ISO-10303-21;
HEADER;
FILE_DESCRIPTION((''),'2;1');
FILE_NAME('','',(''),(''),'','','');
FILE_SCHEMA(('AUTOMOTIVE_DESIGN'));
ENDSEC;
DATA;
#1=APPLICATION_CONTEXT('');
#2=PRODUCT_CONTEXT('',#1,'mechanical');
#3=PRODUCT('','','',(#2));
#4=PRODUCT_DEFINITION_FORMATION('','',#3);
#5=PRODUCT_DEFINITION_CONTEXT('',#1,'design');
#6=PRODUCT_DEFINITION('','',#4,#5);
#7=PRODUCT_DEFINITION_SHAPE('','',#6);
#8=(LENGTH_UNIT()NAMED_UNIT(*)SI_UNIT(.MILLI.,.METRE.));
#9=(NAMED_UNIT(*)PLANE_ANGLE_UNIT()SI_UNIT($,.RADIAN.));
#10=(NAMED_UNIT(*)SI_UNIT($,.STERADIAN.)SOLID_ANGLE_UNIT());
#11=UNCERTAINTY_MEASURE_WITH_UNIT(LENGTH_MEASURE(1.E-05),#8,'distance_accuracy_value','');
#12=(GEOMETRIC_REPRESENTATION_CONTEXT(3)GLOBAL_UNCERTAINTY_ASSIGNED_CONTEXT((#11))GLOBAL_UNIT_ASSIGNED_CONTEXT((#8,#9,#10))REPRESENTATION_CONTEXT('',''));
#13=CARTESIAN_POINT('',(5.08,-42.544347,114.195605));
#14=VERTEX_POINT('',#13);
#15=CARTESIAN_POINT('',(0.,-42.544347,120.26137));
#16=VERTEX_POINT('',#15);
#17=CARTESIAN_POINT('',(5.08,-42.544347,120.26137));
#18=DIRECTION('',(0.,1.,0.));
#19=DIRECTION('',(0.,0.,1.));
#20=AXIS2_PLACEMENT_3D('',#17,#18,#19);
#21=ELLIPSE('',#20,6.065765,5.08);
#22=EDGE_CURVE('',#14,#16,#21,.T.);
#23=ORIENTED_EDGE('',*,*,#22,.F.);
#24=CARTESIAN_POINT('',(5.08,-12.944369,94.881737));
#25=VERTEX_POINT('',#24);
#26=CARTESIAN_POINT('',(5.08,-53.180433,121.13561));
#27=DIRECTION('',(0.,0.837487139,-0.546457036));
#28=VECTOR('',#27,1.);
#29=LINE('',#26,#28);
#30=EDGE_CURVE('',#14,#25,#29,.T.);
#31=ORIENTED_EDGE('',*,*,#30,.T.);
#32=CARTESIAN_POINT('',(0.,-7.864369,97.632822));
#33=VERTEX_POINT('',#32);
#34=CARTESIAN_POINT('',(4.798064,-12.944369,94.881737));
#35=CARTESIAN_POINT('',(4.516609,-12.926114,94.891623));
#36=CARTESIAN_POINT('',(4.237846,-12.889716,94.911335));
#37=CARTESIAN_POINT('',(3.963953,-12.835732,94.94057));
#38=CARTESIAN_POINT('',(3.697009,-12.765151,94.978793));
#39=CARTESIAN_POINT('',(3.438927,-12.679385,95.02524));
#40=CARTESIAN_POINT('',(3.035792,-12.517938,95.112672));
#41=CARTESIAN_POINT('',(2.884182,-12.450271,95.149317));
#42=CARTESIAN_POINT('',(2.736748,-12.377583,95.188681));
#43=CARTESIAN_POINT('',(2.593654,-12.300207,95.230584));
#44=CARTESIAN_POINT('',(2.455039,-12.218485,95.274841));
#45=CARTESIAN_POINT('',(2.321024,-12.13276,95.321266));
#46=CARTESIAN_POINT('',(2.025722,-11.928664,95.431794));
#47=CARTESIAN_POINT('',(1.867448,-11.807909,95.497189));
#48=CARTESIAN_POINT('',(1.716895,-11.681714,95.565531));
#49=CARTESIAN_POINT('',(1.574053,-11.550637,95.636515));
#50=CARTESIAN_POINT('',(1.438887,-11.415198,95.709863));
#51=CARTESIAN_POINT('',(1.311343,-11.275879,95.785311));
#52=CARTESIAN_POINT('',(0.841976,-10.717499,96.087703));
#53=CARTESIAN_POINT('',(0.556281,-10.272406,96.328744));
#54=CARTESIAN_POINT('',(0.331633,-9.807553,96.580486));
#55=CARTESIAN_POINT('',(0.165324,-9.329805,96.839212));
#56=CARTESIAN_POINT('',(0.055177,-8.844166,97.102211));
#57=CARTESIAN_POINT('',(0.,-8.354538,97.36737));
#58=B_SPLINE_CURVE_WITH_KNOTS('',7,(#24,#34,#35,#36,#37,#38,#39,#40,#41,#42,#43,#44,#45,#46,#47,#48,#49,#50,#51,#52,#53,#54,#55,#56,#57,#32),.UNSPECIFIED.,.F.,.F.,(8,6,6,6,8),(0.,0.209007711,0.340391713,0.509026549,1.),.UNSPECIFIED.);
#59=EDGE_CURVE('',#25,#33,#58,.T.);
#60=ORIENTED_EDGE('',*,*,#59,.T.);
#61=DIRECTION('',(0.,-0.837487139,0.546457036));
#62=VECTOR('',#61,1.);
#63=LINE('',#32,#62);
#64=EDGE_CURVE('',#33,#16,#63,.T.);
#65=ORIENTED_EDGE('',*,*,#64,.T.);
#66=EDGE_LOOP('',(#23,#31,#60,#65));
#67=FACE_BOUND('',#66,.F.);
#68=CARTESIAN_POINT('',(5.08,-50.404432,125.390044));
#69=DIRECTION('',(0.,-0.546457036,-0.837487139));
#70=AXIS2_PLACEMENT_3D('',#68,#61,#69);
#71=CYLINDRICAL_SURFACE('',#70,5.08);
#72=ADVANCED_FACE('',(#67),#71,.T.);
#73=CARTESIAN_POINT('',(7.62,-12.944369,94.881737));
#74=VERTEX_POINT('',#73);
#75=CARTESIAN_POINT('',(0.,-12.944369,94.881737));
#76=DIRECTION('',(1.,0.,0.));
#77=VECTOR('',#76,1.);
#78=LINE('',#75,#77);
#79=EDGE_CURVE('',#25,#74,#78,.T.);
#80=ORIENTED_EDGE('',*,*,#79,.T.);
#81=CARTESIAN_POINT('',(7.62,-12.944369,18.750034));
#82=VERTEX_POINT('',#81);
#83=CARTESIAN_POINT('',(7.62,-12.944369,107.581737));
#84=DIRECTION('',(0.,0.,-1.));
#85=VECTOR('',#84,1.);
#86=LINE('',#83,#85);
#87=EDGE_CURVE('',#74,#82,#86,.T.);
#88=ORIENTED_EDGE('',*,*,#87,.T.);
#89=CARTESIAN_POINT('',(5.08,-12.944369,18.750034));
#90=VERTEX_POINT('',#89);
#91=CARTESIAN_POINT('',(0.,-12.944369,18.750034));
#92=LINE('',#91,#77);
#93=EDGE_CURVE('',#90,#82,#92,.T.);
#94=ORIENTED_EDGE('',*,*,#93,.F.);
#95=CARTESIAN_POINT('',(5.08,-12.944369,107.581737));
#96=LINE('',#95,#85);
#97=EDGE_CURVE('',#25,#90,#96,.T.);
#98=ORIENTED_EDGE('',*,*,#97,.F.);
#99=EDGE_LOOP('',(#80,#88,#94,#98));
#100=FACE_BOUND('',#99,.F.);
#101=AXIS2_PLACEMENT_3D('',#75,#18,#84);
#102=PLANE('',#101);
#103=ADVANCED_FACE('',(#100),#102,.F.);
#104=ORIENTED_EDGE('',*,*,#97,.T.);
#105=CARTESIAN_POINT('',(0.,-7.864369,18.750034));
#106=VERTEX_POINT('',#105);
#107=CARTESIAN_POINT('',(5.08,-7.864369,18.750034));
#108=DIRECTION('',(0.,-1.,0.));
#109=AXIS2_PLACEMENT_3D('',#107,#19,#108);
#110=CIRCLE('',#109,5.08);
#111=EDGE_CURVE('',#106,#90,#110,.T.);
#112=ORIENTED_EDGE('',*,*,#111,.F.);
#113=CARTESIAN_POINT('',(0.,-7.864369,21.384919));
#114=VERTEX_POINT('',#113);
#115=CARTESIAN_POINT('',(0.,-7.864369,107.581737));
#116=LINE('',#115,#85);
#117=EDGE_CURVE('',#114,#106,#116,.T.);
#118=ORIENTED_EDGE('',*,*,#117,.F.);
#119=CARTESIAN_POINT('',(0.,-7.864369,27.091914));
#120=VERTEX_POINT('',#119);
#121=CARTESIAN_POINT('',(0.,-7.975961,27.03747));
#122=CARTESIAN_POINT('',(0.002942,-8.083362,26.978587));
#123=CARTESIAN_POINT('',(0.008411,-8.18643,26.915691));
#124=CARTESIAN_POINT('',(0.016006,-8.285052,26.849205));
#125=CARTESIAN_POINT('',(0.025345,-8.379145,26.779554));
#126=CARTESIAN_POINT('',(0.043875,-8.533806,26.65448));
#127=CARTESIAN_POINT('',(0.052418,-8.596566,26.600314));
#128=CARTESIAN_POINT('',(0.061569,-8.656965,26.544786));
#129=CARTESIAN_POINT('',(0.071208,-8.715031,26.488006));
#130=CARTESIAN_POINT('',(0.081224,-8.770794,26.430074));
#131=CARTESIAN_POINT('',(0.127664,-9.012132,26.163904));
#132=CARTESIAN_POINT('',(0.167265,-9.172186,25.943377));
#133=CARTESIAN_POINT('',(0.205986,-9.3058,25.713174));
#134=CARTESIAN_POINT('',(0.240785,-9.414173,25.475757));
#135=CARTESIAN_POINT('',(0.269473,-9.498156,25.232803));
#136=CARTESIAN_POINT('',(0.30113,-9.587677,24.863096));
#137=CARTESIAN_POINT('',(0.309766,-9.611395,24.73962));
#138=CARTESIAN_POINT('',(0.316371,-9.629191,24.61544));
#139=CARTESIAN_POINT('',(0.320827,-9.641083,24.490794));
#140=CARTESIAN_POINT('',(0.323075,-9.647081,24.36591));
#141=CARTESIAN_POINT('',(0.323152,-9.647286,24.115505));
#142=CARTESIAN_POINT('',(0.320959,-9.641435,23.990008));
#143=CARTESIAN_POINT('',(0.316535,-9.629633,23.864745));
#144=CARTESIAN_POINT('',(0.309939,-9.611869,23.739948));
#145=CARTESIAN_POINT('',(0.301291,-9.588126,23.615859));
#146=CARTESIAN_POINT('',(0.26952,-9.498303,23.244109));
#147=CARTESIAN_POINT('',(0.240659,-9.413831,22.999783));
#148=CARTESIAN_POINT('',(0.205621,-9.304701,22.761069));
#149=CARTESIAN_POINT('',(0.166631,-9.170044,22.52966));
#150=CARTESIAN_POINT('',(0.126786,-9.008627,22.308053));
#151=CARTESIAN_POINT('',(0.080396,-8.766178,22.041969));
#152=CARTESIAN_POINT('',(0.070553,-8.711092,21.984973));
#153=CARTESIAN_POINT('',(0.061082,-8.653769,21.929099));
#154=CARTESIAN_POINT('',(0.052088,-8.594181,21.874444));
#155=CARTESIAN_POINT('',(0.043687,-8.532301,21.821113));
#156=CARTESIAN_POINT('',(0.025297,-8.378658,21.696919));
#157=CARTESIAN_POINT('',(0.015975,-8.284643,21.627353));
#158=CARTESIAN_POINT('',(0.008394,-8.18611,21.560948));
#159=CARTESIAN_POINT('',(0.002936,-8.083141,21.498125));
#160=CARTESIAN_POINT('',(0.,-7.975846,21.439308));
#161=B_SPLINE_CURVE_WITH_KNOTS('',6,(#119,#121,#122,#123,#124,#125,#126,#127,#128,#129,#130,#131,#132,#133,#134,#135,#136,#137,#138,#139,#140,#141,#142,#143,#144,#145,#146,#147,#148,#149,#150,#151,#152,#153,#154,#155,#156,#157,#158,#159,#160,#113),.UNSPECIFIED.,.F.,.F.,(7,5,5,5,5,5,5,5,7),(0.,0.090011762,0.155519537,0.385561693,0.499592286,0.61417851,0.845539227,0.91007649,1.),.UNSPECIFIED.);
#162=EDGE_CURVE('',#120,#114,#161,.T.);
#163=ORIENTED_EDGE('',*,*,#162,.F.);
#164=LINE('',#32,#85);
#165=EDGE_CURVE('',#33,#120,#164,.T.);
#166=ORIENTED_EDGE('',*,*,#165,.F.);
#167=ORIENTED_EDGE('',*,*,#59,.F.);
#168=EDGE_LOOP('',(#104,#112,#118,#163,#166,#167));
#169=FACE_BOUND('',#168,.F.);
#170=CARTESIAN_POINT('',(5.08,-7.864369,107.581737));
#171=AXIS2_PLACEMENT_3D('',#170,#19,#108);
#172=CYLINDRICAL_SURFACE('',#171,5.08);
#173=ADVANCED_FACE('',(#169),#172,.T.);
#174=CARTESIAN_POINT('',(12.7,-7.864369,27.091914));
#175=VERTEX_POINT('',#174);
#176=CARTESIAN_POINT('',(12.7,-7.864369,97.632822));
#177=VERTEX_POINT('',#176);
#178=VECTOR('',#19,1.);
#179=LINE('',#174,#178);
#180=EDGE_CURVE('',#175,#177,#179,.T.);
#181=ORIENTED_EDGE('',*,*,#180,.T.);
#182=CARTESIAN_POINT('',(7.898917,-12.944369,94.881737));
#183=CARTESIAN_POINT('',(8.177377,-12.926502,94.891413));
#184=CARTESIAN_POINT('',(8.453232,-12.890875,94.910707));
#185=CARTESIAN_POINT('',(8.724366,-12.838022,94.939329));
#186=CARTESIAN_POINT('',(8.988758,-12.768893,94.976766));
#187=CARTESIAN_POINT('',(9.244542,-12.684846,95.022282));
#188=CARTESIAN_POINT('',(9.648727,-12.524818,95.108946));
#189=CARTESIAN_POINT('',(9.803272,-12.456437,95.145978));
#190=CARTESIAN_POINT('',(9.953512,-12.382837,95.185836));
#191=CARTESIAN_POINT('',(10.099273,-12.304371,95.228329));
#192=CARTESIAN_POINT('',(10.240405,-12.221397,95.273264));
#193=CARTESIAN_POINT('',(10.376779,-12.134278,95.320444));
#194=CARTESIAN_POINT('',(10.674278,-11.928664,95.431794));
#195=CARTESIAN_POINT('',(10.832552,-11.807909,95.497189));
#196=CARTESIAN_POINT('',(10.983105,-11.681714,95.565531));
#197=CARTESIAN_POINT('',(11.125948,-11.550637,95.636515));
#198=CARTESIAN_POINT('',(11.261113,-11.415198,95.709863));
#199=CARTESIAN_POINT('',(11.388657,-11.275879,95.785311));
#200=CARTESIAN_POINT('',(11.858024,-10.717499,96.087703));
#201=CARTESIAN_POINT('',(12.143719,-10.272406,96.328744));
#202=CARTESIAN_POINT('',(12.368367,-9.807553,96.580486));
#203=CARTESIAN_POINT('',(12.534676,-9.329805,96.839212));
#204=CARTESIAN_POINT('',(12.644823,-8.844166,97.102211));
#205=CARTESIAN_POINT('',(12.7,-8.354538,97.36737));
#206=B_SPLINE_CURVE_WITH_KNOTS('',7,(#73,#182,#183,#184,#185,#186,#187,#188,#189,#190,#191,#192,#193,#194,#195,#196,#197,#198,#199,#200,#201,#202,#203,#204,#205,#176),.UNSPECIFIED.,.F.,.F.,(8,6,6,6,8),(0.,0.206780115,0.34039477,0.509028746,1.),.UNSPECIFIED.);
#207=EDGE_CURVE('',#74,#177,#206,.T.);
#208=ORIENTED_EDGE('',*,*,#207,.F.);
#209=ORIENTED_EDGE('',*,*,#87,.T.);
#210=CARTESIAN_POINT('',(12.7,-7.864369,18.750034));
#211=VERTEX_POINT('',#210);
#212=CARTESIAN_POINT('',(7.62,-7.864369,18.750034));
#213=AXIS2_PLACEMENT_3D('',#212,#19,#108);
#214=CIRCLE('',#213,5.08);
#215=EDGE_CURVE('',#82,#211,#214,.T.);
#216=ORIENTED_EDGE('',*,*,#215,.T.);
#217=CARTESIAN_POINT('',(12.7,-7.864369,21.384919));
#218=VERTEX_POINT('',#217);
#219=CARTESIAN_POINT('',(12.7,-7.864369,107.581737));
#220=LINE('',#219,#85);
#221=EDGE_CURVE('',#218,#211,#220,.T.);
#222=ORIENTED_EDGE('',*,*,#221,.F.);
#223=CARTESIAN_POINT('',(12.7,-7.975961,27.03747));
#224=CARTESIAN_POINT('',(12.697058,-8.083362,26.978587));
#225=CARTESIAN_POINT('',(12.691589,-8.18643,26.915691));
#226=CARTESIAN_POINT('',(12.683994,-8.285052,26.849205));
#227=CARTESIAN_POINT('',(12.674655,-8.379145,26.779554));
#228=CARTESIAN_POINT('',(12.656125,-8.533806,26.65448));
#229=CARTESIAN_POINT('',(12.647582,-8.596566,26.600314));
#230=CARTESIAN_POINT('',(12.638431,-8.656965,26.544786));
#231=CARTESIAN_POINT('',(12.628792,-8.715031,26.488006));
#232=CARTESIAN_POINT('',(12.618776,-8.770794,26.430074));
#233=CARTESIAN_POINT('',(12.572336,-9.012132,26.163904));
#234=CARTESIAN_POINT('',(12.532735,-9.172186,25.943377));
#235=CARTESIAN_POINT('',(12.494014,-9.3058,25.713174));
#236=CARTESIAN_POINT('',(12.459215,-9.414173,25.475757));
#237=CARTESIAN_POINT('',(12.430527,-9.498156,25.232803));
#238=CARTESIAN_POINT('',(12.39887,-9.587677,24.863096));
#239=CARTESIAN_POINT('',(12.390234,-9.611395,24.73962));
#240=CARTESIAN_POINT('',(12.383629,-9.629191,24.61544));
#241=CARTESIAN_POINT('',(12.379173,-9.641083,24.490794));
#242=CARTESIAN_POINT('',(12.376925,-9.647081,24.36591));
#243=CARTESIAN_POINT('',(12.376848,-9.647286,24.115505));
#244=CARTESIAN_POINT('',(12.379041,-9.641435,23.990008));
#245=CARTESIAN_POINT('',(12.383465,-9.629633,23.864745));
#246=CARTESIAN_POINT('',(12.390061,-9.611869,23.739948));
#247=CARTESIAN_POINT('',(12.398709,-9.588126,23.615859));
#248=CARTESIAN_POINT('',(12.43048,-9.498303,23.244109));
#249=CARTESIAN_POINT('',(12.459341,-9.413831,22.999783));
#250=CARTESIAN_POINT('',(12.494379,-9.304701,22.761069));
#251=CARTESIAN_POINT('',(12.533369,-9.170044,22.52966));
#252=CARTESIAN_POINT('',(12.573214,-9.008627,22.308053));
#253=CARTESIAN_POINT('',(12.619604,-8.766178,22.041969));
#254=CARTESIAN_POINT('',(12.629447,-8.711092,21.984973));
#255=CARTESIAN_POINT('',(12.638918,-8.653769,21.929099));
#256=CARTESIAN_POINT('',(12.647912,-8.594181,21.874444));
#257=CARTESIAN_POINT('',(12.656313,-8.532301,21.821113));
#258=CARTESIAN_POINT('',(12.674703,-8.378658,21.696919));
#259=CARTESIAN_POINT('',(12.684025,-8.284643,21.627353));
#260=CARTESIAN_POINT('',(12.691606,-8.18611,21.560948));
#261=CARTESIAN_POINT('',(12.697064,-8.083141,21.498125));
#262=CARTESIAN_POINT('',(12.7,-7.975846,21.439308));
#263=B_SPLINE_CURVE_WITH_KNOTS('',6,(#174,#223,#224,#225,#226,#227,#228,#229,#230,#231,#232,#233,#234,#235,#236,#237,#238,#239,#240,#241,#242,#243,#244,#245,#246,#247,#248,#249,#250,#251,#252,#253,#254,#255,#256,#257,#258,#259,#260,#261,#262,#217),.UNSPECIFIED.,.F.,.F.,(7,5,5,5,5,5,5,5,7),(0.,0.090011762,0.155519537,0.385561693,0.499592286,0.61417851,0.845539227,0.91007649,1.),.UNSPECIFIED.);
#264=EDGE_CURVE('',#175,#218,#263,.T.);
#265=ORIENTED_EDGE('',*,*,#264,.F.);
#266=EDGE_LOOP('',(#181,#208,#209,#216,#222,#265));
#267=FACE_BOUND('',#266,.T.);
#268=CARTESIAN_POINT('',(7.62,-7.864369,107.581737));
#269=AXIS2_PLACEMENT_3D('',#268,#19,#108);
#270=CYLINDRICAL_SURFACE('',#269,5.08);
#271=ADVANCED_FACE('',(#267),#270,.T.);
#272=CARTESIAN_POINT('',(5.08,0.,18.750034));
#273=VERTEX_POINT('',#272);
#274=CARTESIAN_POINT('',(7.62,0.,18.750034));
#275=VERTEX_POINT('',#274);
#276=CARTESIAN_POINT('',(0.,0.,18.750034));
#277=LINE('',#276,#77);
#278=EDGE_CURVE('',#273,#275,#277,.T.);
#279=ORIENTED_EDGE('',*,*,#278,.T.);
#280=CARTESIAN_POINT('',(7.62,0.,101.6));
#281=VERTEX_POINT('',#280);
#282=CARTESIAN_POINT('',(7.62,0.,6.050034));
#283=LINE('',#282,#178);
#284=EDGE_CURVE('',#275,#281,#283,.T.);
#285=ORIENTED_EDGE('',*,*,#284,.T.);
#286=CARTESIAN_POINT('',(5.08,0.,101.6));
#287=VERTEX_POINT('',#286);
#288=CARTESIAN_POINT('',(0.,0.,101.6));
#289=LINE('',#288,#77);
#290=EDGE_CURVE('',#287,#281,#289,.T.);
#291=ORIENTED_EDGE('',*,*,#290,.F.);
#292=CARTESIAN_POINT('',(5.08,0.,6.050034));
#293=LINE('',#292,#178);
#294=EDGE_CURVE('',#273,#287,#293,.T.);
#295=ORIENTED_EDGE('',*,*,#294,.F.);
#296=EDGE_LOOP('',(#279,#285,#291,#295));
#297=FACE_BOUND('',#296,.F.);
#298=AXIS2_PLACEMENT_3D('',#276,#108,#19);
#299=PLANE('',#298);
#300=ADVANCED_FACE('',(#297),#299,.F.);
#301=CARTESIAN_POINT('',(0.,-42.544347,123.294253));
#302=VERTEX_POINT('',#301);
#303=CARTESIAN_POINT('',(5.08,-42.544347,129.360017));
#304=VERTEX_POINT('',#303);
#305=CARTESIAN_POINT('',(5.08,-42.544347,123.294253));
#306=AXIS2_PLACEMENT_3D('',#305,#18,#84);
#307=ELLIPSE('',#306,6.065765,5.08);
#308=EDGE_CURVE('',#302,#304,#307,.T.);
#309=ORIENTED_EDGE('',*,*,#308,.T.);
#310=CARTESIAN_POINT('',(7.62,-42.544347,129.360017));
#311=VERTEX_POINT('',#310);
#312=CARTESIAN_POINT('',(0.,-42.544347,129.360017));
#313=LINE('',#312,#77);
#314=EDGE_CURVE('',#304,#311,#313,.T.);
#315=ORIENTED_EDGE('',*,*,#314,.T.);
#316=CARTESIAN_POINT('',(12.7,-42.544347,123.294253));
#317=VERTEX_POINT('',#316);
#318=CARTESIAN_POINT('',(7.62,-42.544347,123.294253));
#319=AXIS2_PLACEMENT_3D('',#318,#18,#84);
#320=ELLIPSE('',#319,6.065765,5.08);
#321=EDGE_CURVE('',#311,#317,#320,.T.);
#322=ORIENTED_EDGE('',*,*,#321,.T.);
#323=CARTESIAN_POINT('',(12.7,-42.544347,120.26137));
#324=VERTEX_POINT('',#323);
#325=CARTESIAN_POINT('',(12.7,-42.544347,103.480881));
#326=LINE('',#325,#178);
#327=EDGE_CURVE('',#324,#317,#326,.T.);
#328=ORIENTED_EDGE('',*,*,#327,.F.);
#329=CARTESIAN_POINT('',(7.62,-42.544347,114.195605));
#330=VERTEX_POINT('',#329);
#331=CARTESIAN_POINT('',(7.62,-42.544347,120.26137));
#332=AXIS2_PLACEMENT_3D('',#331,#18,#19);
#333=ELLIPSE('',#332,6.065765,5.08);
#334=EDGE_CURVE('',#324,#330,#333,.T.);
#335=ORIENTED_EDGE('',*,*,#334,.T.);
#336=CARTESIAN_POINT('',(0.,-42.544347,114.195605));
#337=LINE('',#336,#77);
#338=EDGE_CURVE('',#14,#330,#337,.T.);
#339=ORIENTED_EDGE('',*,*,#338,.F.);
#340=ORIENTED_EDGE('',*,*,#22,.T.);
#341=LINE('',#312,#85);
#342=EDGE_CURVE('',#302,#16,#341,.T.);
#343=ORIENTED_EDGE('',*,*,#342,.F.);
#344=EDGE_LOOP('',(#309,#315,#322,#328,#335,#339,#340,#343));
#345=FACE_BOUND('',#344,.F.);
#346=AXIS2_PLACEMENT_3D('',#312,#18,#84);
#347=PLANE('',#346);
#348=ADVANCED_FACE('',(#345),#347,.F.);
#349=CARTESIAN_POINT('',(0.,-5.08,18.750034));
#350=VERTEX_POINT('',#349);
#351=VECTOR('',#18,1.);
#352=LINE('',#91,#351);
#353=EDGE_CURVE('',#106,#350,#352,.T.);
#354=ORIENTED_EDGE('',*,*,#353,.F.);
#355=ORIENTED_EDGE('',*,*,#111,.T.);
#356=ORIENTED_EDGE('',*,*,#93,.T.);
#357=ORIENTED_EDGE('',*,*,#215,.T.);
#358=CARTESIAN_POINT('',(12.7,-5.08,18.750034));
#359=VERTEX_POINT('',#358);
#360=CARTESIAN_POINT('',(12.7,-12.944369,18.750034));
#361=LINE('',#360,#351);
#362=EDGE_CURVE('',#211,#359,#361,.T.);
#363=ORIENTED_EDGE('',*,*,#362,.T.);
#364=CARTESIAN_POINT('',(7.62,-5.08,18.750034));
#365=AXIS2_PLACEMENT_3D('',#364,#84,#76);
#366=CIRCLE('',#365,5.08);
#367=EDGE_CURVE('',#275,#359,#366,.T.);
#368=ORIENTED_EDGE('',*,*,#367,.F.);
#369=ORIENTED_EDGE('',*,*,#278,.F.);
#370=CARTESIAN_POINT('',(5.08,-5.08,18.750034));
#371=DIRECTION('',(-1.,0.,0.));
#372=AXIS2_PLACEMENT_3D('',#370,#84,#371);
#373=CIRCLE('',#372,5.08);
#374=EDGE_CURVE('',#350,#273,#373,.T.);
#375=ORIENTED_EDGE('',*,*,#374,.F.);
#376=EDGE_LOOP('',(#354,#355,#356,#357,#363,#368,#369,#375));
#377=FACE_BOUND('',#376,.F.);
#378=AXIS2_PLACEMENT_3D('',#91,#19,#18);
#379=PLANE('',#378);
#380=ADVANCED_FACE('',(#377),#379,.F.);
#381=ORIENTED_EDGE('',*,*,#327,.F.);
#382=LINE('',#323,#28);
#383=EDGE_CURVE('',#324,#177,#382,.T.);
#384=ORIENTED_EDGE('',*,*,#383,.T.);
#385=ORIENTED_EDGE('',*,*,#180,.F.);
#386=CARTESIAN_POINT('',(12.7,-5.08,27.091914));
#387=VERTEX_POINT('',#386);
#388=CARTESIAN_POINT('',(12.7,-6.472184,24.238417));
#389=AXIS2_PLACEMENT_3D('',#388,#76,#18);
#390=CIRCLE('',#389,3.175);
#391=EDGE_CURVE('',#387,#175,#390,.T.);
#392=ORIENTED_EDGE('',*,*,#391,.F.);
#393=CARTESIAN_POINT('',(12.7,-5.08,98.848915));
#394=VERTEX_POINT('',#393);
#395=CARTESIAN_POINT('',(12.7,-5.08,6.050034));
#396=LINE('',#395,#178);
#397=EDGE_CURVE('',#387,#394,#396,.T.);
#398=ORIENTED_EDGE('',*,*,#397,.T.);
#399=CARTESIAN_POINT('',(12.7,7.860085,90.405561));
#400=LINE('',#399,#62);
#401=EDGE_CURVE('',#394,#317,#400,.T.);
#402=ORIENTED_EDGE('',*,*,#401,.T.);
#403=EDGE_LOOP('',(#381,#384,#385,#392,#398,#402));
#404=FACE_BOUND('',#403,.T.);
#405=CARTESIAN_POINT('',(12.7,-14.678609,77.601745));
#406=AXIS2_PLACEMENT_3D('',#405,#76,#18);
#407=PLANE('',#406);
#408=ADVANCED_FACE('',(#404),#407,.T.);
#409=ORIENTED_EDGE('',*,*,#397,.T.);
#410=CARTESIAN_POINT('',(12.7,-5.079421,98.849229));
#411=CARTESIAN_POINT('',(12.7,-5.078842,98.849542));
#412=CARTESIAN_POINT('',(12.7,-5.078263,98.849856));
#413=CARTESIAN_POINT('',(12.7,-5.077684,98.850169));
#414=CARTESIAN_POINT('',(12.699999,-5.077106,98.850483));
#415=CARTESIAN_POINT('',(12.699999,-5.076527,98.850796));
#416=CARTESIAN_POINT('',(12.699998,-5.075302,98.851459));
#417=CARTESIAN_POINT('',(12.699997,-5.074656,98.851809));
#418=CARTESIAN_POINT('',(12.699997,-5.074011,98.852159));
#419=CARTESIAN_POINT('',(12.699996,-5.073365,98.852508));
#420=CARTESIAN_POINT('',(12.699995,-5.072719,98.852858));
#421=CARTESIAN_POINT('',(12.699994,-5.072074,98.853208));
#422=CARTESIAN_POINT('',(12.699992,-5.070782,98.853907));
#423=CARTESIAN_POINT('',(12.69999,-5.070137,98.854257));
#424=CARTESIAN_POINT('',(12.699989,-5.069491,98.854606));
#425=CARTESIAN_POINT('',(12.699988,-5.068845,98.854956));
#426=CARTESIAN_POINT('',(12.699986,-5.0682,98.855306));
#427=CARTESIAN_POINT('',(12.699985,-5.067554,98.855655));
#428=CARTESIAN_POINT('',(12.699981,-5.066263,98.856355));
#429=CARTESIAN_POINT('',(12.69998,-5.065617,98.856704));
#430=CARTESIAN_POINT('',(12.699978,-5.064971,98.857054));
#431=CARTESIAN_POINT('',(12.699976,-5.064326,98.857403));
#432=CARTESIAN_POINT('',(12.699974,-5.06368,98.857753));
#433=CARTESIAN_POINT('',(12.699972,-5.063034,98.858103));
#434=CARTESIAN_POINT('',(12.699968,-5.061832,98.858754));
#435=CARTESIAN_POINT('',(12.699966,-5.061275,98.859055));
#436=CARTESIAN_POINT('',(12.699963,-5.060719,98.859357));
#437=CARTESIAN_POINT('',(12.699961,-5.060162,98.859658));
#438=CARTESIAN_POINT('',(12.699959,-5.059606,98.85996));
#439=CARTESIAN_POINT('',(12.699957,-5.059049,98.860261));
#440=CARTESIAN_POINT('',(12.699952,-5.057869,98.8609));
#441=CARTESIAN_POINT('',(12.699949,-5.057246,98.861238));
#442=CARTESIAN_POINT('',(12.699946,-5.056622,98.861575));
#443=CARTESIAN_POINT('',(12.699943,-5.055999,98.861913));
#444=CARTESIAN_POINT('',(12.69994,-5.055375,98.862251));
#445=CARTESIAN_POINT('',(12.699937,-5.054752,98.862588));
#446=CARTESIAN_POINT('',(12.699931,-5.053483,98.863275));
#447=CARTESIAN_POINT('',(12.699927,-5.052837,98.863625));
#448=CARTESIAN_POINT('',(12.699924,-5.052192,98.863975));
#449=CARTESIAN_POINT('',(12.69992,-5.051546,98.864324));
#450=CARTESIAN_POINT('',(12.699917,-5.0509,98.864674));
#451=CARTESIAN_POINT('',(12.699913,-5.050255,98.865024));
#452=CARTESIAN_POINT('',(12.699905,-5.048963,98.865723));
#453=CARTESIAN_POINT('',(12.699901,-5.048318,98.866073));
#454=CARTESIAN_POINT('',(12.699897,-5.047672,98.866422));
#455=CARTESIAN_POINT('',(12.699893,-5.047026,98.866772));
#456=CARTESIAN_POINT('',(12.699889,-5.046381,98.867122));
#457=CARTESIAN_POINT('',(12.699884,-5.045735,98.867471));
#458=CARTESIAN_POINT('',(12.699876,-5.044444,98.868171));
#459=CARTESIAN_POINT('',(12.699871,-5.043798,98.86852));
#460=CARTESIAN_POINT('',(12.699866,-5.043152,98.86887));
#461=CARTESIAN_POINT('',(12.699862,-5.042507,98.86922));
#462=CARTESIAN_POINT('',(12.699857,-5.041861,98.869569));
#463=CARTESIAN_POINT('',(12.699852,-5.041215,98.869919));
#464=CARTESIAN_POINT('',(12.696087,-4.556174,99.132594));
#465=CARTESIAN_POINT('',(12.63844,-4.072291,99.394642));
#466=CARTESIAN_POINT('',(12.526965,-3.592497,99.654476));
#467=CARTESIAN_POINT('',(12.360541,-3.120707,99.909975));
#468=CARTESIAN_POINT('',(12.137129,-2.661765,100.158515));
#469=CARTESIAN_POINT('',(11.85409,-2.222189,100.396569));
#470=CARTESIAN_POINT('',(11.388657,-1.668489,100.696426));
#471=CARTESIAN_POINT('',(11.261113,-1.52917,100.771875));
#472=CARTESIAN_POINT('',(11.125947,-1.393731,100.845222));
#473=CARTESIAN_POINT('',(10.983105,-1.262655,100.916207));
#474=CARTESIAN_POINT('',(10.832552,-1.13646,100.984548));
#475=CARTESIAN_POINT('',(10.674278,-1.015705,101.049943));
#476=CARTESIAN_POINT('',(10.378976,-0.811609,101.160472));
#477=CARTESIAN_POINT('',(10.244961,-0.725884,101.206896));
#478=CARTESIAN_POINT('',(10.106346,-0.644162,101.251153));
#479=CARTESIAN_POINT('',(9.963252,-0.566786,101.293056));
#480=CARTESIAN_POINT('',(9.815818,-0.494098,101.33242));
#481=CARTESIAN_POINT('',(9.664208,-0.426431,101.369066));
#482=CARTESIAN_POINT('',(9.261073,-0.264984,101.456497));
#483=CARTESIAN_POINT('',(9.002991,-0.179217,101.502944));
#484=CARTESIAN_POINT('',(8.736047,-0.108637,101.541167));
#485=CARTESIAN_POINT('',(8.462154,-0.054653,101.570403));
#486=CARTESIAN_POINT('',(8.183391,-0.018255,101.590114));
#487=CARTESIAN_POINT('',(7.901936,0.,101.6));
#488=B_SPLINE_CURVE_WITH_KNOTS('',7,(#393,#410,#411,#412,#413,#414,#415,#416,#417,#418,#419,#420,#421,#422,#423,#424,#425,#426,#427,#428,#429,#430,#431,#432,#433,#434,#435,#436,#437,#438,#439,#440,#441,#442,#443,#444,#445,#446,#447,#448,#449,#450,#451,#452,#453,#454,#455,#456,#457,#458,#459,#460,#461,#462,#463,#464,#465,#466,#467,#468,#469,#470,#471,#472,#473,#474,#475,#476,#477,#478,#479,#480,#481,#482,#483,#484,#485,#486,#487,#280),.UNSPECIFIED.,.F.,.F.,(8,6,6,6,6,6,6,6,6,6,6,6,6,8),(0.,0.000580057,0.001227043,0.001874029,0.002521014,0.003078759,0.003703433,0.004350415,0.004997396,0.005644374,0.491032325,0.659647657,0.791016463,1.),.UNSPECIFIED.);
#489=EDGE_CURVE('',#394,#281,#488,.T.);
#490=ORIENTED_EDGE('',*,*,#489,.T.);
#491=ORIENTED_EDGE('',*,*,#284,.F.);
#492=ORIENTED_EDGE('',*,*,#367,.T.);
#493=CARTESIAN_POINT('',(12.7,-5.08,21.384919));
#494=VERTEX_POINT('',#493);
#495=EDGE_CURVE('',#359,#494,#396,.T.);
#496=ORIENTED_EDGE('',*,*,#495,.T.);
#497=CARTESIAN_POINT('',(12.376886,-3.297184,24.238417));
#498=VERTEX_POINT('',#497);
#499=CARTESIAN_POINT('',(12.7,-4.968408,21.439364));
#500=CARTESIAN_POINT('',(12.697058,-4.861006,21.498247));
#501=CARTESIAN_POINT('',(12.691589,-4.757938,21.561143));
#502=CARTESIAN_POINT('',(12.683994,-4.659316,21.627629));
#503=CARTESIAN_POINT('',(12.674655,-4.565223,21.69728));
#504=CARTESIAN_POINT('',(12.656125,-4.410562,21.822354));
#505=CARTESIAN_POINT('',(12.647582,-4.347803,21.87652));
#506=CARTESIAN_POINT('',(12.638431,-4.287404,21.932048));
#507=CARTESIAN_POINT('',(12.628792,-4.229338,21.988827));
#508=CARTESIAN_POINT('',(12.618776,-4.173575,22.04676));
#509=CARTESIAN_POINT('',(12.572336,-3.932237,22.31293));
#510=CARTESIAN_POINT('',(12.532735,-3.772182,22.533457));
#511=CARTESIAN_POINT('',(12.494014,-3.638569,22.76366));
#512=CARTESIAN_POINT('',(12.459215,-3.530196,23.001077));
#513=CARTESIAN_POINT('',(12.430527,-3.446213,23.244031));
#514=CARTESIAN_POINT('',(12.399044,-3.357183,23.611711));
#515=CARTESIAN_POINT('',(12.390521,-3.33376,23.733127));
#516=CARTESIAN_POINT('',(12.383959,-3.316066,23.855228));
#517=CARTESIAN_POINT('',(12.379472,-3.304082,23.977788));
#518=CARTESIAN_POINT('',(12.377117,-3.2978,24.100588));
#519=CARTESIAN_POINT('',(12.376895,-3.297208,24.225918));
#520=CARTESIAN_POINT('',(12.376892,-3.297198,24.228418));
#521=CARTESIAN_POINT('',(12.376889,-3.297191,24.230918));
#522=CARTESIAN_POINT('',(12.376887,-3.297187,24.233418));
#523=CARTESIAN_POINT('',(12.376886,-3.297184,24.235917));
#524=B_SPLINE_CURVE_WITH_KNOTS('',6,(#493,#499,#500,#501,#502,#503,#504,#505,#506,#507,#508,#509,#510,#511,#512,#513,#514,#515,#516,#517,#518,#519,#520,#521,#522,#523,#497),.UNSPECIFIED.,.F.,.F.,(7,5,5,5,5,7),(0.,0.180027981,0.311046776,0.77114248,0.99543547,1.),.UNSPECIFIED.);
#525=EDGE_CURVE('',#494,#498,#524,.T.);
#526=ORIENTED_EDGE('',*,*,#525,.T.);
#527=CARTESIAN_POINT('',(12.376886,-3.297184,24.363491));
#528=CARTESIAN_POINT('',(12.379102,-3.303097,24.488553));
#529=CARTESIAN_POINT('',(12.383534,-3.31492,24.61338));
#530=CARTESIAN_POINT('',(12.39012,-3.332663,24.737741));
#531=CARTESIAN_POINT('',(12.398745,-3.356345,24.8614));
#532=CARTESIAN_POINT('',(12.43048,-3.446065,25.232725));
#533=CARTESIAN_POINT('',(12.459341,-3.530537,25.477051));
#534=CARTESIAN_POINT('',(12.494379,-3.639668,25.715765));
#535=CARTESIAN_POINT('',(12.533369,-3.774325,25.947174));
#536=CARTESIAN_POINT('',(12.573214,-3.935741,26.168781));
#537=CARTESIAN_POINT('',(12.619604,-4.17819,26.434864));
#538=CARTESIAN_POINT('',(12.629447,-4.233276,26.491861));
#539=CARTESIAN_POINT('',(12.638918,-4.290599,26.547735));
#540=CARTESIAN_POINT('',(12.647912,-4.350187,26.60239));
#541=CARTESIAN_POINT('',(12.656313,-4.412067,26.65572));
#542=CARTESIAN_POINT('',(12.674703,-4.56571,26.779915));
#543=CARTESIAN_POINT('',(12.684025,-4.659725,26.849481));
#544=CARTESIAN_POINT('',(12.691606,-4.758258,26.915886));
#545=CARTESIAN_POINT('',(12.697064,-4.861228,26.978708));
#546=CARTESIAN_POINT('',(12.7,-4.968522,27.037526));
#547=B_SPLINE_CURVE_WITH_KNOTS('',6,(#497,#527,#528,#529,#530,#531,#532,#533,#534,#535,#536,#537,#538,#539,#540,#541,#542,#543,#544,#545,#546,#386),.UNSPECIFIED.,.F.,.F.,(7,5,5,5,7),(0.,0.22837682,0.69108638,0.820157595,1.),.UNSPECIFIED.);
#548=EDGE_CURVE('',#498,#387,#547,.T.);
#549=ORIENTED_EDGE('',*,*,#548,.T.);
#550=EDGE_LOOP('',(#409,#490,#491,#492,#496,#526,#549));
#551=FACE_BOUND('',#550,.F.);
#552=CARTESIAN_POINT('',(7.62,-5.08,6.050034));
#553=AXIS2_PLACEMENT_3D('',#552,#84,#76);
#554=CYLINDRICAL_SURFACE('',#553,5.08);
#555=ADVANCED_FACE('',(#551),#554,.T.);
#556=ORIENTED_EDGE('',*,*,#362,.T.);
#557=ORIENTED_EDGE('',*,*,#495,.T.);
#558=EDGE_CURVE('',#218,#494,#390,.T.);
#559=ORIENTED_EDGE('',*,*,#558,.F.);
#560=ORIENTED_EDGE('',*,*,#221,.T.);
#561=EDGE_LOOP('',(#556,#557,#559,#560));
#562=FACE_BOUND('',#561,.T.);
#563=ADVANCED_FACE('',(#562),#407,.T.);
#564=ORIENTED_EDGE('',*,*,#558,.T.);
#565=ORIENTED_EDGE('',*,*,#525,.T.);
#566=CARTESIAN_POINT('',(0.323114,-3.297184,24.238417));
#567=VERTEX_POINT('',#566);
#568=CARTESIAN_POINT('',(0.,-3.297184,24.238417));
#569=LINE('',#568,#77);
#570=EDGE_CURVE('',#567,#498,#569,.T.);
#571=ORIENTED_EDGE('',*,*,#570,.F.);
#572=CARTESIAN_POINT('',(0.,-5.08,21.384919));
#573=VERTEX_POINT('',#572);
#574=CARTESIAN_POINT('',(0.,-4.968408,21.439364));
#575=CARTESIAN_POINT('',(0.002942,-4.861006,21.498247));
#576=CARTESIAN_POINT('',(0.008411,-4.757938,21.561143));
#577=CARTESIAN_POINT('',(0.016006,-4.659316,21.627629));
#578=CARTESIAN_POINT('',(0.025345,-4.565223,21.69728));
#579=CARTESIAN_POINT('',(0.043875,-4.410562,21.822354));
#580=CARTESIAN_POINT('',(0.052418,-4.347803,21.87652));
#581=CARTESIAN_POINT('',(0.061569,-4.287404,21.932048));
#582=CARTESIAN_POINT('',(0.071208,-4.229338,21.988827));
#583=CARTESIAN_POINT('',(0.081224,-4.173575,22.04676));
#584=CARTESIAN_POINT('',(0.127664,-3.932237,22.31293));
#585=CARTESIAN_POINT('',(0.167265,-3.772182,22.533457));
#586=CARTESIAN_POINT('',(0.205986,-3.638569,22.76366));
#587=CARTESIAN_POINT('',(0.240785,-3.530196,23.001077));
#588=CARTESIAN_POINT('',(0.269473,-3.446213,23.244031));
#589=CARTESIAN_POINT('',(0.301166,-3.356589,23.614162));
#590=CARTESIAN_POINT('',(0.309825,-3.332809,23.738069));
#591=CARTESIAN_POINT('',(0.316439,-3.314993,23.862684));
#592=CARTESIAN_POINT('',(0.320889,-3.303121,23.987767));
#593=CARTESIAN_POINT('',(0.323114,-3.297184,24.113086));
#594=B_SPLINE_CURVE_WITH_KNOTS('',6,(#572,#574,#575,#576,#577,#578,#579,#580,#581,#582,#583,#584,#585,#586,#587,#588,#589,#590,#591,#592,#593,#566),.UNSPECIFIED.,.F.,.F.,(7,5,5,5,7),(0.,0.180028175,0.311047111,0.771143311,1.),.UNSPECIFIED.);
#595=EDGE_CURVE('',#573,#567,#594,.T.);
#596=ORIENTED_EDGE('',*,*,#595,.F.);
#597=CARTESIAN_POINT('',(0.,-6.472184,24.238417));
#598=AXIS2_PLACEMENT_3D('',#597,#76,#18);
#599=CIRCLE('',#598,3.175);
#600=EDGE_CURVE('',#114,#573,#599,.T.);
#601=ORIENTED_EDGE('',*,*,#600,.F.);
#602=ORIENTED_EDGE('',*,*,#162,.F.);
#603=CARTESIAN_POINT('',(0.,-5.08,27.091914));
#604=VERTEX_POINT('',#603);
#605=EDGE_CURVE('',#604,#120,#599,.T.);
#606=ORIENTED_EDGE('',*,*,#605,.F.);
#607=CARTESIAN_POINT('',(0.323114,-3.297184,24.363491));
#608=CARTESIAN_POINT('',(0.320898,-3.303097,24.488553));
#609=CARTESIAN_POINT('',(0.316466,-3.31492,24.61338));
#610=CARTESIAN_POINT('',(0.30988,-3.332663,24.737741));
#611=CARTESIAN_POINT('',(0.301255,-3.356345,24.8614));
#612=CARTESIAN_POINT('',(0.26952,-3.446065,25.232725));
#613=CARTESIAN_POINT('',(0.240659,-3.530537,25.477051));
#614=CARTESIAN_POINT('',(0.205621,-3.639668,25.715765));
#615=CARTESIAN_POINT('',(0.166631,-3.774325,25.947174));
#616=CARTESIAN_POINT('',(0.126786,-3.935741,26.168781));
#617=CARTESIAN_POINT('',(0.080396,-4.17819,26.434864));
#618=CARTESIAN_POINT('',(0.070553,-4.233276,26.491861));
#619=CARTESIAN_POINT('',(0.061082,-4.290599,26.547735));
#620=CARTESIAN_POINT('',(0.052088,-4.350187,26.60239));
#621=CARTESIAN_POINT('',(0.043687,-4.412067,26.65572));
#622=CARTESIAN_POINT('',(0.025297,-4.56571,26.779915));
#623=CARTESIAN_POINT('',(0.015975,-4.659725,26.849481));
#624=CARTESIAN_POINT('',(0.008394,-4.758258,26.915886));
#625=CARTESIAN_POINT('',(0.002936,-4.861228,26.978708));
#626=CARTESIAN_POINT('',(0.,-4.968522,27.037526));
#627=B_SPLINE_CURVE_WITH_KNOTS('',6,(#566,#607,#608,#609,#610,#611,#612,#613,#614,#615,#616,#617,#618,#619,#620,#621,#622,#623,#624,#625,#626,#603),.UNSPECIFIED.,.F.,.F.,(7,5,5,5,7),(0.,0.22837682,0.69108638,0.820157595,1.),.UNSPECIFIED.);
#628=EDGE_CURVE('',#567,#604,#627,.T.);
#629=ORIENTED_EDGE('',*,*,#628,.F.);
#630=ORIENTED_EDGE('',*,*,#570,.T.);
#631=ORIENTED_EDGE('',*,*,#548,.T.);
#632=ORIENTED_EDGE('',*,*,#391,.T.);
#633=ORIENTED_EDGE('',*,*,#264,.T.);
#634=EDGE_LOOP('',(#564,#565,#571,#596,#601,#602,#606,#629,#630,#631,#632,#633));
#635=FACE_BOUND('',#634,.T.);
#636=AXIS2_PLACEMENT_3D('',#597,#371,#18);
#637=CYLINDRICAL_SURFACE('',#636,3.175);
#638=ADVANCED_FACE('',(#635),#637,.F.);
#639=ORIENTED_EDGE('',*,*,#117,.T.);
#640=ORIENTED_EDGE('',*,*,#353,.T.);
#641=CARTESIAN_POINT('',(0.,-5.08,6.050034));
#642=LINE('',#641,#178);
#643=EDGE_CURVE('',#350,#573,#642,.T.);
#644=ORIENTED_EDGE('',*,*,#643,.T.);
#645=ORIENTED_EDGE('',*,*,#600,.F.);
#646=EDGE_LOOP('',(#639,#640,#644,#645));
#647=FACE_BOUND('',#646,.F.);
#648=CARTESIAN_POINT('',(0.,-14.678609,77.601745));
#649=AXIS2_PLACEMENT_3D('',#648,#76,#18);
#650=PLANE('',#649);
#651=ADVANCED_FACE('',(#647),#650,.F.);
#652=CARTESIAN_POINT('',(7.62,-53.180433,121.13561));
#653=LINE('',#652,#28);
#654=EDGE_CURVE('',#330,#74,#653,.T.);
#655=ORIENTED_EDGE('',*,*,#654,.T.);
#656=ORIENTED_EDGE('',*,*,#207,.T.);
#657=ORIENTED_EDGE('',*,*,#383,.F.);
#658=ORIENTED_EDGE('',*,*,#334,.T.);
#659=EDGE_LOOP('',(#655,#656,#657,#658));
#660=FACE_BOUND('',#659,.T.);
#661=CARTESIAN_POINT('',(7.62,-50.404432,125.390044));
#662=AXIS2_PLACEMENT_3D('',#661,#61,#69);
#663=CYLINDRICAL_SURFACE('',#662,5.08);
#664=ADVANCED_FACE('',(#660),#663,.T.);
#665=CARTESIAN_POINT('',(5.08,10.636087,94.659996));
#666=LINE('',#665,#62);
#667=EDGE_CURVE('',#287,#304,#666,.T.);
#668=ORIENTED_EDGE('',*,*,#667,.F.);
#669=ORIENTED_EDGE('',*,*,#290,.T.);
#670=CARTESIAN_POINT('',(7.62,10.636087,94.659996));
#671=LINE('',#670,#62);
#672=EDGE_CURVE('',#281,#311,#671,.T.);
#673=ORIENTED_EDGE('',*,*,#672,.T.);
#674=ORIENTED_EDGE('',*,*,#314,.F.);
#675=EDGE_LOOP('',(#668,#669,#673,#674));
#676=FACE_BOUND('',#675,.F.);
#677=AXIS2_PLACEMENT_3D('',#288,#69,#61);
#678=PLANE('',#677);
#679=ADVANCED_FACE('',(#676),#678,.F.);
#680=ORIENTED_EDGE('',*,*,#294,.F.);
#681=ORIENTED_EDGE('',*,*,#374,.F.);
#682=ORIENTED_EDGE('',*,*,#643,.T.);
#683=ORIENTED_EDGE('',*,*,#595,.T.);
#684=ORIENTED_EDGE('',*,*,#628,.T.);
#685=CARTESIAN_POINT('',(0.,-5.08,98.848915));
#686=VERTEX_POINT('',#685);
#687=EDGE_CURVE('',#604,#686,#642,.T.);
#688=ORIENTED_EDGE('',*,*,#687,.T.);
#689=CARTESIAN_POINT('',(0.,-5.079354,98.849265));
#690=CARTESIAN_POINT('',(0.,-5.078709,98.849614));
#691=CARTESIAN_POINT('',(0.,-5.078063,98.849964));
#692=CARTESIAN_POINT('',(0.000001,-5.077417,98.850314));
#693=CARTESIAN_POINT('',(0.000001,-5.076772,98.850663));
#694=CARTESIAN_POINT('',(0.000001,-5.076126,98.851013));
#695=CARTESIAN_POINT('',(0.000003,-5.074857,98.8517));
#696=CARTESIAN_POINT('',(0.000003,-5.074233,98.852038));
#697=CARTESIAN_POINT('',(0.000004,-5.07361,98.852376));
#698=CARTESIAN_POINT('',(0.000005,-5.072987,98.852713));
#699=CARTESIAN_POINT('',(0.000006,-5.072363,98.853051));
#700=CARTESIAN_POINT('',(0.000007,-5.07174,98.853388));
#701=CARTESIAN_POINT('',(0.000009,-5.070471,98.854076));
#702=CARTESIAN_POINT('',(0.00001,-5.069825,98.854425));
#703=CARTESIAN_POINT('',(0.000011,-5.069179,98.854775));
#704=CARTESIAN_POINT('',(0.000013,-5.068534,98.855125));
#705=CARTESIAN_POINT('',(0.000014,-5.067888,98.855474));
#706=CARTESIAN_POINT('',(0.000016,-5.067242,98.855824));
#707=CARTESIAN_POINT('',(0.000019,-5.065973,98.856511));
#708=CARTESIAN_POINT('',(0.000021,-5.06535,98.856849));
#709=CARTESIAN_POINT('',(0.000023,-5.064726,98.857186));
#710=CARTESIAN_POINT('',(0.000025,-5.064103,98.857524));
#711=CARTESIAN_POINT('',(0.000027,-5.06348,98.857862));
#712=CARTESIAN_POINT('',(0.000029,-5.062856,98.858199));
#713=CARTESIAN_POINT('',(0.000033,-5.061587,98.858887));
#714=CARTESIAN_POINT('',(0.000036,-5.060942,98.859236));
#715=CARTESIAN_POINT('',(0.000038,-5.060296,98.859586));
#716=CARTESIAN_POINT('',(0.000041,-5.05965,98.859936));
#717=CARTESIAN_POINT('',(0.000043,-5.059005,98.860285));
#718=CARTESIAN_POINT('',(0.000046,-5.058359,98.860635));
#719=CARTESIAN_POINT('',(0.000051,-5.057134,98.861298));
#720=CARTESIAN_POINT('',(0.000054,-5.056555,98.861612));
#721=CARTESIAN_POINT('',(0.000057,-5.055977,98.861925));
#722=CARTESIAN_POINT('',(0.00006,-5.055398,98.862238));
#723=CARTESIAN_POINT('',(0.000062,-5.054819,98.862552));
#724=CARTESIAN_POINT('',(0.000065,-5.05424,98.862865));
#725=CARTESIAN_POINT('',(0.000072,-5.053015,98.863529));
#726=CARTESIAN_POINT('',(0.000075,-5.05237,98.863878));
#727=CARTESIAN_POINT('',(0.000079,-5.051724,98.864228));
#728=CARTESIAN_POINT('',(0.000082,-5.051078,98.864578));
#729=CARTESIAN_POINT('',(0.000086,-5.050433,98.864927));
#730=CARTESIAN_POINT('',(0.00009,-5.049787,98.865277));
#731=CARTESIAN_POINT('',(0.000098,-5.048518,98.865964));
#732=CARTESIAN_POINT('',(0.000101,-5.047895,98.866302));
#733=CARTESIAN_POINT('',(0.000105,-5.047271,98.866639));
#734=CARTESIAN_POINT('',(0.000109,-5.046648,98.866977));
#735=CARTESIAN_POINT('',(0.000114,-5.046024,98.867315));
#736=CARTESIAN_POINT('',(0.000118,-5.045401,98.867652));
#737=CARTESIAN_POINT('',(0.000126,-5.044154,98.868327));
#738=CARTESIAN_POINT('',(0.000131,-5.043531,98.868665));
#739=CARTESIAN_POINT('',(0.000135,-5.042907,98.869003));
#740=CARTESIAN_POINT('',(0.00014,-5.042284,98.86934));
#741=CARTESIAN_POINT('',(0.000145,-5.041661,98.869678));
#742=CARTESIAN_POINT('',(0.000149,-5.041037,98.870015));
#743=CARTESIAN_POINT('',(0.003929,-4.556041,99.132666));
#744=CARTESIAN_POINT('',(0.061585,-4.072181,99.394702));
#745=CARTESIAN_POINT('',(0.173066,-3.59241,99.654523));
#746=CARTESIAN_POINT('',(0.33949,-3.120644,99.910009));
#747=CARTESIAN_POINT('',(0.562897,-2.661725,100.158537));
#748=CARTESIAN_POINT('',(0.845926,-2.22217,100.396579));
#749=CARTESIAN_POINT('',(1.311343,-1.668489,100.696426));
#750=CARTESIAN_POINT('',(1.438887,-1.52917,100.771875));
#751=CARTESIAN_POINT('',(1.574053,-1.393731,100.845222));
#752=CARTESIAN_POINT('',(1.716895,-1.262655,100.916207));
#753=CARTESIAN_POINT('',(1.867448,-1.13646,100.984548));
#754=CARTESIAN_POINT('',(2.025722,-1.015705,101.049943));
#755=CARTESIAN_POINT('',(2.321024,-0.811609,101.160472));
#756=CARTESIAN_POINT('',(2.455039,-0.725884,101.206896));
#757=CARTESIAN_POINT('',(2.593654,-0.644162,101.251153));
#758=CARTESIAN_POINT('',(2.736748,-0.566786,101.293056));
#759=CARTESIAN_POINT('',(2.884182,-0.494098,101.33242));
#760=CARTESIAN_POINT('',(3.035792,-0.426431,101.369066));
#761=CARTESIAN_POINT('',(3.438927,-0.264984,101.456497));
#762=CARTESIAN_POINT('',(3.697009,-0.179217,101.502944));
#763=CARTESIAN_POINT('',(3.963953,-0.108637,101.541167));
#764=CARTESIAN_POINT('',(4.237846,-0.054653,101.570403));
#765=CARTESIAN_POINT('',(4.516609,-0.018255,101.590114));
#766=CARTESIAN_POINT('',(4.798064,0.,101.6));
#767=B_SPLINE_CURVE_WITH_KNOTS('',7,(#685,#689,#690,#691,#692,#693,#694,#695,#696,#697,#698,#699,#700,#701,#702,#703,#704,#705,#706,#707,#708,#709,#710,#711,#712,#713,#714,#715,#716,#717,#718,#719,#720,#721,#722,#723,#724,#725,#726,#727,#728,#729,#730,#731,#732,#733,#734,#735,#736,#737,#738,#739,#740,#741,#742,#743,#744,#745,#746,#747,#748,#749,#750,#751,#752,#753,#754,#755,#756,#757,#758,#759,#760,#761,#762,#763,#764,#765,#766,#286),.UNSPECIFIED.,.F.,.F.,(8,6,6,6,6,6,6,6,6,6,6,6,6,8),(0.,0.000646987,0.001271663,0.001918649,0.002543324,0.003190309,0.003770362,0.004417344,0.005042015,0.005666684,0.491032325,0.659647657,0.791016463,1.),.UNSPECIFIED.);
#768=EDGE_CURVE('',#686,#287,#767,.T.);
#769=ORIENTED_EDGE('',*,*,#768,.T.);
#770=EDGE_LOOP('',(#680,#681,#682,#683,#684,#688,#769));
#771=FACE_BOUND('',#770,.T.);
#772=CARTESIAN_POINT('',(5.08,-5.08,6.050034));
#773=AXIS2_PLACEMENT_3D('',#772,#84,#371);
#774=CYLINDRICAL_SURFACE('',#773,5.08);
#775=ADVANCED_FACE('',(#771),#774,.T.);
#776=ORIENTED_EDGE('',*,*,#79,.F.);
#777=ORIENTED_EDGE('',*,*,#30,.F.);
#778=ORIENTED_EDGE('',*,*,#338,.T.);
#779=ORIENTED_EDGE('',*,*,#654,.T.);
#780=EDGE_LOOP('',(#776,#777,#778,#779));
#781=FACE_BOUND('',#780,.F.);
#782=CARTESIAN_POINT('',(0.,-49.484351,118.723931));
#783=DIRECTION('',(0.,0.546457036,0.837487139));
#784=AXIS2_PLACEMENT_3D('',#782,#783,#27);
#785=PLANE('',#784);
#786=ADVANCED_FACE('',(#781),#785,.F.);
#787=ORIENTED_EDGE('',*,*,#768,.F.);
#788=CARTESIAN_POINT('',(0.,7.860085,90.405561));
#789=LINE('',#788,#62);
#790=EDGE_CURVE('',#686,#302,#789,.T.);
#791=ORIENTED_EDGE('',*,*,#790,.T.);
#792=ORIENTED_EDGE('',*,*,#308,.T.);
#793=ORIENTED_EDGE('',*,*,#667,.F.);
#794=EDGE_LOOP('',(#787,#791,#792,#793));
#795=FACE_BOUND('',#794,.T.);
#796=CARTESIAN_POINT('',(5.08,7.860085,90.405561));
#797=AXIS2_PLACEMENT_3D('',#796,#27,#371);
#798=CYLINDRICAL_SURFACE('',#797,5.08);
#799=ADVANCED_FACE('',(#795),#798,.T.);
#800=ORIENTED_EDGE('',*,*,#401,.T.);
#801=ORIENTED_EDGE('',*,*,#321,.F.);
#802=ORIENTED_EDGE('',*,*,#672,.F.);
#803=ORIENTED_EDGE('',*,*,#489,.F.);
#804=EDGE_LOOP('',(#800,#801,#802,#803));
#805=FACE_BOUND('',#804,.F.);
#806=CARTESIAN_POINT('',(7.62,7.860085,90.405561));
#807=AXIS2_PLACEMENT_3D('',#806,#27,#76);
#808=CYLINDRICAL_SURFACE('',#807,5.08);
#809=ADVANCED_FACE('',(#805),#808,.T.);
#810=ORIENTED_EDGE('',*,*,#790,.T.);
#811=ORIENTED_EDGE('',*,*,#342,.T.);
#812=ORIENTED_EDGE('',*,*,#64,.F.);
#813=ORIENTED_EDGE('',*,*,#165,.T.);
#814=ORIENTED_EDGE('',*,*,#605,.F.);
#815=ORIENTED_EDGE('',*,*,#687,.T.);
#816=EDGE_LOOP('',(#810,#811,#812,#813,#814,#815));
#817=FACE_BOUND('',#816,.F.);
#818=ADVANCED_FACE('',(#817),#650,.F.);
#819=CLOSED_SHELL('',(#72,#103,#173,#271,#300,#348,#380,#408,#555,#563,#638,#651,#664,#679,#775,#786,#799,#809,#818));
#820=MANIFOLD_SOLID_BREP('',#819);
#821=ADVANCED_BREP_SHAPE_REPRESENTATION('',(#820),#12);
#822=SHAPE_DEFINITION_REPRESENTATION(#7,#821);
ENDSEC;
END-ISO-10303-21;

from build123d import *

# Parameters (mm, degrees)
F0_R         = 3.175
F1_DEPTH     = 12.7
F3_DEPTH     = 12.701
F4_T1_DEPTH  = 108.2499657273
F4_T3_DEPTH  = 76.2
F4_T8_DEPTH  = 101.5317029417
F4_T13_DEPTH = 101.5317029417
F4_T18_DEPTH = 60.7438000865
F4_T23_DEPTH = 60.7438000865
F4_T29_DEPTH = 101.5317029417
F4_T33_DEPTH = 60.7438000865
F4_T40_DEPTH = 101.5317029417
F4_T44_DEPTH = 60.7438000865


# Not quite as in the source:
# - a fillet or chamfer that OpenCascade refuses, or shapes differently, is made with other operations: its cross-section is extruded or revolved along the edge and cut away or added


with BuildPart() as f1:
    # F0 (on Right) → F1 (new body)
    with BuildSketch(Plane.YZ):
        Polygon((-12.9443686455, 18.7500342727), (0, 18.7500342727), (0, 101.6), (-42.5443466617, 129.3600174195), (-49.4843510166, 118.7239307541), (-12.9443686455, 94.8817372144), align=None)
        with Locations((-6.4721843228, 24.2384169251)):
            Circle(F0_R, mode=Mode.SUBTRACT)
    extrude(amount=F1_DEPTH)

    # F2 (on face) → F3 (cut, through all)
    with BuildSketch(Plane(origin=(0, 0, 0), x_dir=(0, -1, 0), z_dir=(-1, 0, 0))):
        Polygon((49.4843510166, 118.7239307541), (42.5443466617, 129.3600174195), (42.5443466617, 114.1956054441), align=None)
    extrude(amount=-F3_DEPTH, mode=Mode.SUBTRACT)

    # F4: fillet of radius 5.08 on 8 edges, made by hand

    # F4_s2 → F4_t1 (cut)
    with BuildSketch(Plane.XY.offset(6.0500342727)):
        with BuildLine():
            ThreePointArc((0, -5.08), (1.4878975516, -1.4878975516), (5.08, 0))
            Line((5.08, 0), (0, 0))
            Line((0, 0), (0, -5.08))
        make_face()
        with BuildLine():
            ThreePointArc((12.7, -5.08), (11.2121024484, -1.4878975516), (7.62, 0))
            Line((7.62, 0), (12.7, 0))
            Line((12.7, 0), (12.7, -5.08))
        make_face()
    extrude(amount=F4_T1_DEPTH, mode=Mode.SUBTRACT)

    # F4_s4 → F4_t3 (cut)
    with BuildSketch(Plane(origin=(0, -35.8612284696, 23.3993093117), x_dir=(1, 0, 0), z_dir=(0, -0.837487139, 0.5464570358))):
        with BuildLine():
            ThreePointArc((12.7, 80.0086933233), (11.2121024484, 83.6007957718), (7.62, 85.0886933233))
            Line((7.62, 85.0886933233), (12.7, 85.0886933233))
            Line((12.7, 85.0886933233), (12.7, 80.0086933233))
        make_face()
        with BuildLine():
            ThreePointArc((0, 80.0086933233), (1.4878975516, 83.6007957718), (5.08, 85.0886933233))
            Line((5.08, 85.0886933233), (0, 85.0886933233))
            Line((0, 85.0886933233), (0, 80.0086933233))
        make_face()
    extrude(amount=F4_T3_DEPTH, mode=Mode.SUBTRACT)


with BuildPart() as f4_tool6:
    # F4_s7 → F4_t8 (new body)
    with BuildSketch(Plane.XY.offset(107.5817372144)):
        with BuildLine():
            ThreePointArc((5.08, -12.9443686455), (1.4878975516, -11.456471094), (0, -7.8643686455))
            Line((0, -7.8643686455), (0, -12.9443686455))
            Line((0, -12.9443686455), (5.08, -12.9443686455))
        make_face()
    extrude(amount=-F4_T8_DEPTH)

    split(bisect_by=Plane(origin=(0, 39.5573107801, 60.624599668), x_dir=(1, 0, 0), z_dir=(0, -0.5464570358, -0.837487139)), keep=Keep.TOP)


with BuildPart() as f1_1:
    add(f1.part)

    # F4_t5: cut F4_tool6
    add(f4_tool6.part, mode=Mode.SUBTRACT)


with BuildPart() as f4_tool11:
    # F4_s12 → F4_t13 (new body)
    with BuildSketch(Plane.XY.offset(107.5817372144)):
        with BuildLine():
            ThreePointArc((7.62, -12.9443686455), (11.2121024484, -11.456471094), (12.7, -7.8643686455))
            Line((12.7, -7.8643686455), (12.7, -12.9443686455))
            Line((12.7, -12.9443686455), (7.62, -12.9443686455))
        make_face()
    extrude(amount=-F4_T13_DEPTH)

    split(bisect_by=Plane(origin=(0, 39.5573107801, 60.624599668), x_dir=(1, 0, 0), z_dir=(0, -0.5464570358, -0.837487139)), keep=Keep.TOP)


with BuildPart() as f1_2:
    add(f1_1.part)

    # F4_t10: cut F4_tool11
    add(f4_tool11.part, mode=Mode.SUBTRACT)


with BuildPart() as f4_tool16:
    # F4_s17 → F4_t18 (new body)
    with BuildSketch(Plane(origin=(0, -92.7377441072, 60.511010131), x_dir=(1, 0, 0), z_dir=(0, 0.837487139, -0.5464570358))):
        with BuildLine():
            ThreePointArc((7.62, -72.3886933233), (11.2121024484, -73.8765908749), (12.7, -77.4686933233))
            Line((12.7, -77.4686933233), (12.7, -72.3886933233))
            Line((12.7, -72.3886933233), (7.62, -72.3886933233))
        make_face()
    extrude(amount=F4_T18_DEPTH)

    split(bisect_by=Plane.XZ.offset(12.9443686455), keep=Keep.TOP)


with BuildPart() as f1_3:
    add(f1_2.part)

    # F4_t15: cut F4_tool16
    add(f4_tool16.part, mode=Mode.SUBTRACT)


with BuildPart() as f4_tool21:
    # F4_s22 → F4_t23 (new body)
    with BuildSketch(Plane(origin=(0, -92.7377441072, 60.511010131), x_dir=(1, 0, 0), z_dir=(0, 0.837487139, -0.5464570358))):
        with BuildLine():
            ThreePointArc((5.08, -72.3886933233), (1.4878975516, -73.8765908749), (0, -77.4686933233))
            Line((0, -77.4686933233), (0, -72.3886933233))
            Line((0, -72.3886933233), (5.08, -72.3886933233))
        make_face()
    extrude(amount=F4_T23_DEPTH)

    split(bisect_by=Plane.XZ.offset(12.9443686455), keep=Keep.TOP)


with BuildPart() as f1_4:
    add(f1_3.part)

    # F4_t20: cut F4_tool21
    add(f4_tool21.part, mode=Mode.SUBTRACT)


with BuildPart() as f4_tool27:
    # F4_s28 → F4_t29 (new body)
    with BuildSketch(Plane.XY.offset(107.5817372144)):
        with BuildLine():
            ThreePointArc((5.08, -12.9443686455), (1.4878975516, -11.456471094), (0, -7.8643686455))
            Line((0, -7.8643686455), (0, -12.9443686455))
            Line((0, -12.9443686455), (5.08, -12.9443686455))
        make_face()
    extrude(amount=-F4_T29_DEPTH)

    split(bisect_by=Plane(origin=(0, 39.5573107801, 60.624599668), x_dir=(1, 0, 0), z_dir=(0, 0.5464570358, 0.837487139)), keep=Keep.TOP)


with BuildPart() as f4_tool31:
    # F4_s32 → F4_t33 (new body)
    with BuildSketch(Plane(origin=(0, -92.7377441072, 60.511010131), x_dir=(1, 0, 0), z_dir=(0, 0.837487139, -0.5464570358))):
        with BuildLine():
            ThreePointArc((5.08, -72.3886933233), (1.4878975516, -73.8765908749), (0, -77.4686933233))
            Line((0, -77.4686933233), (0, -72.3886933233))
            Line((0, -72.3886933233), (5.08, -72.3886933233))
        make_face()
    extrude(amount=F4_T33_DEPTH)

    split(bisect_by=Plane.XZ.offset(12.9443686455), keep=Keep.BOTTOM)


with BuildPart() as f4_tool27_1:
    add(f4_tool27.part)

    # F4_t35: intersect F4_tool31
    add(f4_tool31.part, mode=Mode.INTERSECT)


with BuildPart() as f1_5:
    add(f1_4.part)

    # F4_t25: cut F4_tool27
    add(f4_tool27_1.part, mode=Mode.SUBTRACT)


with BuildPart() as f4_tool38:
    # F4_s39 → F4_t40 (new body)
    with BuildSketch(Plane.XY.offset(107.5817372144)):
        with BuildLine():
            ThreePointArc((7.62, -12.9443686455), (11.2121024484, -11.456471094), (12.7, -7.8643686455))
            Line((12.7, -7.8643686455), (12.7, -12.9443686455))
            Line((12.7, -12.9443686455), (7.62, -12.9443686455))
        make_face()
    extrude(amount=-F4_T40_DEPTH)

    split(bisect_by=Plane(origin=(0, 39.5573107801, 60.624599668), x_dir=(1, 0, 0), z_dir=(0, 0.5464570358, 0.837487139)), keep=Keep.TOP)


with BuildPart() as f4_tool42:
    # F4_s43 → F4_t44 (new body)
    with BuildSketch(Plane(origin=(0, -92.7377441072, 60.511010131), x_dir=(1, 0, 0), z_dir=(0, 0.837487139, -0.5464570358))):
        with BuildLine():
            ThreePointArc((7.62, -72.3886933233), (11.2121024484, -73.8765908749), (12.7, -77.4686933233))
            Line((12.7, -77.4686933233), (12.7, -72.3886933233))
            Line((12.7, -72.3886933233), (7.62, -72.3886933233))
        make_face()
    extrude(amount=F4_T44_DEPTH)

    split(bisect_by=Plane.XZ.offset(12.9443686455), keep=Keep.BOTTOM)


with BuildPart() as f4_tool38_1:
    add(f4_tool38.part)

    # F4_t46: intersect F4_tool42
    add(f4_tool42.part, mode=Mode.INTERSECT)


with BuildPart() as f1_6:
    add(f1_5.part)

    # F4_t36: cut F4_tool38
    add(f4_tool38_1.part, mode=Mode.SUBTRACT)


solid = f1_6.part
